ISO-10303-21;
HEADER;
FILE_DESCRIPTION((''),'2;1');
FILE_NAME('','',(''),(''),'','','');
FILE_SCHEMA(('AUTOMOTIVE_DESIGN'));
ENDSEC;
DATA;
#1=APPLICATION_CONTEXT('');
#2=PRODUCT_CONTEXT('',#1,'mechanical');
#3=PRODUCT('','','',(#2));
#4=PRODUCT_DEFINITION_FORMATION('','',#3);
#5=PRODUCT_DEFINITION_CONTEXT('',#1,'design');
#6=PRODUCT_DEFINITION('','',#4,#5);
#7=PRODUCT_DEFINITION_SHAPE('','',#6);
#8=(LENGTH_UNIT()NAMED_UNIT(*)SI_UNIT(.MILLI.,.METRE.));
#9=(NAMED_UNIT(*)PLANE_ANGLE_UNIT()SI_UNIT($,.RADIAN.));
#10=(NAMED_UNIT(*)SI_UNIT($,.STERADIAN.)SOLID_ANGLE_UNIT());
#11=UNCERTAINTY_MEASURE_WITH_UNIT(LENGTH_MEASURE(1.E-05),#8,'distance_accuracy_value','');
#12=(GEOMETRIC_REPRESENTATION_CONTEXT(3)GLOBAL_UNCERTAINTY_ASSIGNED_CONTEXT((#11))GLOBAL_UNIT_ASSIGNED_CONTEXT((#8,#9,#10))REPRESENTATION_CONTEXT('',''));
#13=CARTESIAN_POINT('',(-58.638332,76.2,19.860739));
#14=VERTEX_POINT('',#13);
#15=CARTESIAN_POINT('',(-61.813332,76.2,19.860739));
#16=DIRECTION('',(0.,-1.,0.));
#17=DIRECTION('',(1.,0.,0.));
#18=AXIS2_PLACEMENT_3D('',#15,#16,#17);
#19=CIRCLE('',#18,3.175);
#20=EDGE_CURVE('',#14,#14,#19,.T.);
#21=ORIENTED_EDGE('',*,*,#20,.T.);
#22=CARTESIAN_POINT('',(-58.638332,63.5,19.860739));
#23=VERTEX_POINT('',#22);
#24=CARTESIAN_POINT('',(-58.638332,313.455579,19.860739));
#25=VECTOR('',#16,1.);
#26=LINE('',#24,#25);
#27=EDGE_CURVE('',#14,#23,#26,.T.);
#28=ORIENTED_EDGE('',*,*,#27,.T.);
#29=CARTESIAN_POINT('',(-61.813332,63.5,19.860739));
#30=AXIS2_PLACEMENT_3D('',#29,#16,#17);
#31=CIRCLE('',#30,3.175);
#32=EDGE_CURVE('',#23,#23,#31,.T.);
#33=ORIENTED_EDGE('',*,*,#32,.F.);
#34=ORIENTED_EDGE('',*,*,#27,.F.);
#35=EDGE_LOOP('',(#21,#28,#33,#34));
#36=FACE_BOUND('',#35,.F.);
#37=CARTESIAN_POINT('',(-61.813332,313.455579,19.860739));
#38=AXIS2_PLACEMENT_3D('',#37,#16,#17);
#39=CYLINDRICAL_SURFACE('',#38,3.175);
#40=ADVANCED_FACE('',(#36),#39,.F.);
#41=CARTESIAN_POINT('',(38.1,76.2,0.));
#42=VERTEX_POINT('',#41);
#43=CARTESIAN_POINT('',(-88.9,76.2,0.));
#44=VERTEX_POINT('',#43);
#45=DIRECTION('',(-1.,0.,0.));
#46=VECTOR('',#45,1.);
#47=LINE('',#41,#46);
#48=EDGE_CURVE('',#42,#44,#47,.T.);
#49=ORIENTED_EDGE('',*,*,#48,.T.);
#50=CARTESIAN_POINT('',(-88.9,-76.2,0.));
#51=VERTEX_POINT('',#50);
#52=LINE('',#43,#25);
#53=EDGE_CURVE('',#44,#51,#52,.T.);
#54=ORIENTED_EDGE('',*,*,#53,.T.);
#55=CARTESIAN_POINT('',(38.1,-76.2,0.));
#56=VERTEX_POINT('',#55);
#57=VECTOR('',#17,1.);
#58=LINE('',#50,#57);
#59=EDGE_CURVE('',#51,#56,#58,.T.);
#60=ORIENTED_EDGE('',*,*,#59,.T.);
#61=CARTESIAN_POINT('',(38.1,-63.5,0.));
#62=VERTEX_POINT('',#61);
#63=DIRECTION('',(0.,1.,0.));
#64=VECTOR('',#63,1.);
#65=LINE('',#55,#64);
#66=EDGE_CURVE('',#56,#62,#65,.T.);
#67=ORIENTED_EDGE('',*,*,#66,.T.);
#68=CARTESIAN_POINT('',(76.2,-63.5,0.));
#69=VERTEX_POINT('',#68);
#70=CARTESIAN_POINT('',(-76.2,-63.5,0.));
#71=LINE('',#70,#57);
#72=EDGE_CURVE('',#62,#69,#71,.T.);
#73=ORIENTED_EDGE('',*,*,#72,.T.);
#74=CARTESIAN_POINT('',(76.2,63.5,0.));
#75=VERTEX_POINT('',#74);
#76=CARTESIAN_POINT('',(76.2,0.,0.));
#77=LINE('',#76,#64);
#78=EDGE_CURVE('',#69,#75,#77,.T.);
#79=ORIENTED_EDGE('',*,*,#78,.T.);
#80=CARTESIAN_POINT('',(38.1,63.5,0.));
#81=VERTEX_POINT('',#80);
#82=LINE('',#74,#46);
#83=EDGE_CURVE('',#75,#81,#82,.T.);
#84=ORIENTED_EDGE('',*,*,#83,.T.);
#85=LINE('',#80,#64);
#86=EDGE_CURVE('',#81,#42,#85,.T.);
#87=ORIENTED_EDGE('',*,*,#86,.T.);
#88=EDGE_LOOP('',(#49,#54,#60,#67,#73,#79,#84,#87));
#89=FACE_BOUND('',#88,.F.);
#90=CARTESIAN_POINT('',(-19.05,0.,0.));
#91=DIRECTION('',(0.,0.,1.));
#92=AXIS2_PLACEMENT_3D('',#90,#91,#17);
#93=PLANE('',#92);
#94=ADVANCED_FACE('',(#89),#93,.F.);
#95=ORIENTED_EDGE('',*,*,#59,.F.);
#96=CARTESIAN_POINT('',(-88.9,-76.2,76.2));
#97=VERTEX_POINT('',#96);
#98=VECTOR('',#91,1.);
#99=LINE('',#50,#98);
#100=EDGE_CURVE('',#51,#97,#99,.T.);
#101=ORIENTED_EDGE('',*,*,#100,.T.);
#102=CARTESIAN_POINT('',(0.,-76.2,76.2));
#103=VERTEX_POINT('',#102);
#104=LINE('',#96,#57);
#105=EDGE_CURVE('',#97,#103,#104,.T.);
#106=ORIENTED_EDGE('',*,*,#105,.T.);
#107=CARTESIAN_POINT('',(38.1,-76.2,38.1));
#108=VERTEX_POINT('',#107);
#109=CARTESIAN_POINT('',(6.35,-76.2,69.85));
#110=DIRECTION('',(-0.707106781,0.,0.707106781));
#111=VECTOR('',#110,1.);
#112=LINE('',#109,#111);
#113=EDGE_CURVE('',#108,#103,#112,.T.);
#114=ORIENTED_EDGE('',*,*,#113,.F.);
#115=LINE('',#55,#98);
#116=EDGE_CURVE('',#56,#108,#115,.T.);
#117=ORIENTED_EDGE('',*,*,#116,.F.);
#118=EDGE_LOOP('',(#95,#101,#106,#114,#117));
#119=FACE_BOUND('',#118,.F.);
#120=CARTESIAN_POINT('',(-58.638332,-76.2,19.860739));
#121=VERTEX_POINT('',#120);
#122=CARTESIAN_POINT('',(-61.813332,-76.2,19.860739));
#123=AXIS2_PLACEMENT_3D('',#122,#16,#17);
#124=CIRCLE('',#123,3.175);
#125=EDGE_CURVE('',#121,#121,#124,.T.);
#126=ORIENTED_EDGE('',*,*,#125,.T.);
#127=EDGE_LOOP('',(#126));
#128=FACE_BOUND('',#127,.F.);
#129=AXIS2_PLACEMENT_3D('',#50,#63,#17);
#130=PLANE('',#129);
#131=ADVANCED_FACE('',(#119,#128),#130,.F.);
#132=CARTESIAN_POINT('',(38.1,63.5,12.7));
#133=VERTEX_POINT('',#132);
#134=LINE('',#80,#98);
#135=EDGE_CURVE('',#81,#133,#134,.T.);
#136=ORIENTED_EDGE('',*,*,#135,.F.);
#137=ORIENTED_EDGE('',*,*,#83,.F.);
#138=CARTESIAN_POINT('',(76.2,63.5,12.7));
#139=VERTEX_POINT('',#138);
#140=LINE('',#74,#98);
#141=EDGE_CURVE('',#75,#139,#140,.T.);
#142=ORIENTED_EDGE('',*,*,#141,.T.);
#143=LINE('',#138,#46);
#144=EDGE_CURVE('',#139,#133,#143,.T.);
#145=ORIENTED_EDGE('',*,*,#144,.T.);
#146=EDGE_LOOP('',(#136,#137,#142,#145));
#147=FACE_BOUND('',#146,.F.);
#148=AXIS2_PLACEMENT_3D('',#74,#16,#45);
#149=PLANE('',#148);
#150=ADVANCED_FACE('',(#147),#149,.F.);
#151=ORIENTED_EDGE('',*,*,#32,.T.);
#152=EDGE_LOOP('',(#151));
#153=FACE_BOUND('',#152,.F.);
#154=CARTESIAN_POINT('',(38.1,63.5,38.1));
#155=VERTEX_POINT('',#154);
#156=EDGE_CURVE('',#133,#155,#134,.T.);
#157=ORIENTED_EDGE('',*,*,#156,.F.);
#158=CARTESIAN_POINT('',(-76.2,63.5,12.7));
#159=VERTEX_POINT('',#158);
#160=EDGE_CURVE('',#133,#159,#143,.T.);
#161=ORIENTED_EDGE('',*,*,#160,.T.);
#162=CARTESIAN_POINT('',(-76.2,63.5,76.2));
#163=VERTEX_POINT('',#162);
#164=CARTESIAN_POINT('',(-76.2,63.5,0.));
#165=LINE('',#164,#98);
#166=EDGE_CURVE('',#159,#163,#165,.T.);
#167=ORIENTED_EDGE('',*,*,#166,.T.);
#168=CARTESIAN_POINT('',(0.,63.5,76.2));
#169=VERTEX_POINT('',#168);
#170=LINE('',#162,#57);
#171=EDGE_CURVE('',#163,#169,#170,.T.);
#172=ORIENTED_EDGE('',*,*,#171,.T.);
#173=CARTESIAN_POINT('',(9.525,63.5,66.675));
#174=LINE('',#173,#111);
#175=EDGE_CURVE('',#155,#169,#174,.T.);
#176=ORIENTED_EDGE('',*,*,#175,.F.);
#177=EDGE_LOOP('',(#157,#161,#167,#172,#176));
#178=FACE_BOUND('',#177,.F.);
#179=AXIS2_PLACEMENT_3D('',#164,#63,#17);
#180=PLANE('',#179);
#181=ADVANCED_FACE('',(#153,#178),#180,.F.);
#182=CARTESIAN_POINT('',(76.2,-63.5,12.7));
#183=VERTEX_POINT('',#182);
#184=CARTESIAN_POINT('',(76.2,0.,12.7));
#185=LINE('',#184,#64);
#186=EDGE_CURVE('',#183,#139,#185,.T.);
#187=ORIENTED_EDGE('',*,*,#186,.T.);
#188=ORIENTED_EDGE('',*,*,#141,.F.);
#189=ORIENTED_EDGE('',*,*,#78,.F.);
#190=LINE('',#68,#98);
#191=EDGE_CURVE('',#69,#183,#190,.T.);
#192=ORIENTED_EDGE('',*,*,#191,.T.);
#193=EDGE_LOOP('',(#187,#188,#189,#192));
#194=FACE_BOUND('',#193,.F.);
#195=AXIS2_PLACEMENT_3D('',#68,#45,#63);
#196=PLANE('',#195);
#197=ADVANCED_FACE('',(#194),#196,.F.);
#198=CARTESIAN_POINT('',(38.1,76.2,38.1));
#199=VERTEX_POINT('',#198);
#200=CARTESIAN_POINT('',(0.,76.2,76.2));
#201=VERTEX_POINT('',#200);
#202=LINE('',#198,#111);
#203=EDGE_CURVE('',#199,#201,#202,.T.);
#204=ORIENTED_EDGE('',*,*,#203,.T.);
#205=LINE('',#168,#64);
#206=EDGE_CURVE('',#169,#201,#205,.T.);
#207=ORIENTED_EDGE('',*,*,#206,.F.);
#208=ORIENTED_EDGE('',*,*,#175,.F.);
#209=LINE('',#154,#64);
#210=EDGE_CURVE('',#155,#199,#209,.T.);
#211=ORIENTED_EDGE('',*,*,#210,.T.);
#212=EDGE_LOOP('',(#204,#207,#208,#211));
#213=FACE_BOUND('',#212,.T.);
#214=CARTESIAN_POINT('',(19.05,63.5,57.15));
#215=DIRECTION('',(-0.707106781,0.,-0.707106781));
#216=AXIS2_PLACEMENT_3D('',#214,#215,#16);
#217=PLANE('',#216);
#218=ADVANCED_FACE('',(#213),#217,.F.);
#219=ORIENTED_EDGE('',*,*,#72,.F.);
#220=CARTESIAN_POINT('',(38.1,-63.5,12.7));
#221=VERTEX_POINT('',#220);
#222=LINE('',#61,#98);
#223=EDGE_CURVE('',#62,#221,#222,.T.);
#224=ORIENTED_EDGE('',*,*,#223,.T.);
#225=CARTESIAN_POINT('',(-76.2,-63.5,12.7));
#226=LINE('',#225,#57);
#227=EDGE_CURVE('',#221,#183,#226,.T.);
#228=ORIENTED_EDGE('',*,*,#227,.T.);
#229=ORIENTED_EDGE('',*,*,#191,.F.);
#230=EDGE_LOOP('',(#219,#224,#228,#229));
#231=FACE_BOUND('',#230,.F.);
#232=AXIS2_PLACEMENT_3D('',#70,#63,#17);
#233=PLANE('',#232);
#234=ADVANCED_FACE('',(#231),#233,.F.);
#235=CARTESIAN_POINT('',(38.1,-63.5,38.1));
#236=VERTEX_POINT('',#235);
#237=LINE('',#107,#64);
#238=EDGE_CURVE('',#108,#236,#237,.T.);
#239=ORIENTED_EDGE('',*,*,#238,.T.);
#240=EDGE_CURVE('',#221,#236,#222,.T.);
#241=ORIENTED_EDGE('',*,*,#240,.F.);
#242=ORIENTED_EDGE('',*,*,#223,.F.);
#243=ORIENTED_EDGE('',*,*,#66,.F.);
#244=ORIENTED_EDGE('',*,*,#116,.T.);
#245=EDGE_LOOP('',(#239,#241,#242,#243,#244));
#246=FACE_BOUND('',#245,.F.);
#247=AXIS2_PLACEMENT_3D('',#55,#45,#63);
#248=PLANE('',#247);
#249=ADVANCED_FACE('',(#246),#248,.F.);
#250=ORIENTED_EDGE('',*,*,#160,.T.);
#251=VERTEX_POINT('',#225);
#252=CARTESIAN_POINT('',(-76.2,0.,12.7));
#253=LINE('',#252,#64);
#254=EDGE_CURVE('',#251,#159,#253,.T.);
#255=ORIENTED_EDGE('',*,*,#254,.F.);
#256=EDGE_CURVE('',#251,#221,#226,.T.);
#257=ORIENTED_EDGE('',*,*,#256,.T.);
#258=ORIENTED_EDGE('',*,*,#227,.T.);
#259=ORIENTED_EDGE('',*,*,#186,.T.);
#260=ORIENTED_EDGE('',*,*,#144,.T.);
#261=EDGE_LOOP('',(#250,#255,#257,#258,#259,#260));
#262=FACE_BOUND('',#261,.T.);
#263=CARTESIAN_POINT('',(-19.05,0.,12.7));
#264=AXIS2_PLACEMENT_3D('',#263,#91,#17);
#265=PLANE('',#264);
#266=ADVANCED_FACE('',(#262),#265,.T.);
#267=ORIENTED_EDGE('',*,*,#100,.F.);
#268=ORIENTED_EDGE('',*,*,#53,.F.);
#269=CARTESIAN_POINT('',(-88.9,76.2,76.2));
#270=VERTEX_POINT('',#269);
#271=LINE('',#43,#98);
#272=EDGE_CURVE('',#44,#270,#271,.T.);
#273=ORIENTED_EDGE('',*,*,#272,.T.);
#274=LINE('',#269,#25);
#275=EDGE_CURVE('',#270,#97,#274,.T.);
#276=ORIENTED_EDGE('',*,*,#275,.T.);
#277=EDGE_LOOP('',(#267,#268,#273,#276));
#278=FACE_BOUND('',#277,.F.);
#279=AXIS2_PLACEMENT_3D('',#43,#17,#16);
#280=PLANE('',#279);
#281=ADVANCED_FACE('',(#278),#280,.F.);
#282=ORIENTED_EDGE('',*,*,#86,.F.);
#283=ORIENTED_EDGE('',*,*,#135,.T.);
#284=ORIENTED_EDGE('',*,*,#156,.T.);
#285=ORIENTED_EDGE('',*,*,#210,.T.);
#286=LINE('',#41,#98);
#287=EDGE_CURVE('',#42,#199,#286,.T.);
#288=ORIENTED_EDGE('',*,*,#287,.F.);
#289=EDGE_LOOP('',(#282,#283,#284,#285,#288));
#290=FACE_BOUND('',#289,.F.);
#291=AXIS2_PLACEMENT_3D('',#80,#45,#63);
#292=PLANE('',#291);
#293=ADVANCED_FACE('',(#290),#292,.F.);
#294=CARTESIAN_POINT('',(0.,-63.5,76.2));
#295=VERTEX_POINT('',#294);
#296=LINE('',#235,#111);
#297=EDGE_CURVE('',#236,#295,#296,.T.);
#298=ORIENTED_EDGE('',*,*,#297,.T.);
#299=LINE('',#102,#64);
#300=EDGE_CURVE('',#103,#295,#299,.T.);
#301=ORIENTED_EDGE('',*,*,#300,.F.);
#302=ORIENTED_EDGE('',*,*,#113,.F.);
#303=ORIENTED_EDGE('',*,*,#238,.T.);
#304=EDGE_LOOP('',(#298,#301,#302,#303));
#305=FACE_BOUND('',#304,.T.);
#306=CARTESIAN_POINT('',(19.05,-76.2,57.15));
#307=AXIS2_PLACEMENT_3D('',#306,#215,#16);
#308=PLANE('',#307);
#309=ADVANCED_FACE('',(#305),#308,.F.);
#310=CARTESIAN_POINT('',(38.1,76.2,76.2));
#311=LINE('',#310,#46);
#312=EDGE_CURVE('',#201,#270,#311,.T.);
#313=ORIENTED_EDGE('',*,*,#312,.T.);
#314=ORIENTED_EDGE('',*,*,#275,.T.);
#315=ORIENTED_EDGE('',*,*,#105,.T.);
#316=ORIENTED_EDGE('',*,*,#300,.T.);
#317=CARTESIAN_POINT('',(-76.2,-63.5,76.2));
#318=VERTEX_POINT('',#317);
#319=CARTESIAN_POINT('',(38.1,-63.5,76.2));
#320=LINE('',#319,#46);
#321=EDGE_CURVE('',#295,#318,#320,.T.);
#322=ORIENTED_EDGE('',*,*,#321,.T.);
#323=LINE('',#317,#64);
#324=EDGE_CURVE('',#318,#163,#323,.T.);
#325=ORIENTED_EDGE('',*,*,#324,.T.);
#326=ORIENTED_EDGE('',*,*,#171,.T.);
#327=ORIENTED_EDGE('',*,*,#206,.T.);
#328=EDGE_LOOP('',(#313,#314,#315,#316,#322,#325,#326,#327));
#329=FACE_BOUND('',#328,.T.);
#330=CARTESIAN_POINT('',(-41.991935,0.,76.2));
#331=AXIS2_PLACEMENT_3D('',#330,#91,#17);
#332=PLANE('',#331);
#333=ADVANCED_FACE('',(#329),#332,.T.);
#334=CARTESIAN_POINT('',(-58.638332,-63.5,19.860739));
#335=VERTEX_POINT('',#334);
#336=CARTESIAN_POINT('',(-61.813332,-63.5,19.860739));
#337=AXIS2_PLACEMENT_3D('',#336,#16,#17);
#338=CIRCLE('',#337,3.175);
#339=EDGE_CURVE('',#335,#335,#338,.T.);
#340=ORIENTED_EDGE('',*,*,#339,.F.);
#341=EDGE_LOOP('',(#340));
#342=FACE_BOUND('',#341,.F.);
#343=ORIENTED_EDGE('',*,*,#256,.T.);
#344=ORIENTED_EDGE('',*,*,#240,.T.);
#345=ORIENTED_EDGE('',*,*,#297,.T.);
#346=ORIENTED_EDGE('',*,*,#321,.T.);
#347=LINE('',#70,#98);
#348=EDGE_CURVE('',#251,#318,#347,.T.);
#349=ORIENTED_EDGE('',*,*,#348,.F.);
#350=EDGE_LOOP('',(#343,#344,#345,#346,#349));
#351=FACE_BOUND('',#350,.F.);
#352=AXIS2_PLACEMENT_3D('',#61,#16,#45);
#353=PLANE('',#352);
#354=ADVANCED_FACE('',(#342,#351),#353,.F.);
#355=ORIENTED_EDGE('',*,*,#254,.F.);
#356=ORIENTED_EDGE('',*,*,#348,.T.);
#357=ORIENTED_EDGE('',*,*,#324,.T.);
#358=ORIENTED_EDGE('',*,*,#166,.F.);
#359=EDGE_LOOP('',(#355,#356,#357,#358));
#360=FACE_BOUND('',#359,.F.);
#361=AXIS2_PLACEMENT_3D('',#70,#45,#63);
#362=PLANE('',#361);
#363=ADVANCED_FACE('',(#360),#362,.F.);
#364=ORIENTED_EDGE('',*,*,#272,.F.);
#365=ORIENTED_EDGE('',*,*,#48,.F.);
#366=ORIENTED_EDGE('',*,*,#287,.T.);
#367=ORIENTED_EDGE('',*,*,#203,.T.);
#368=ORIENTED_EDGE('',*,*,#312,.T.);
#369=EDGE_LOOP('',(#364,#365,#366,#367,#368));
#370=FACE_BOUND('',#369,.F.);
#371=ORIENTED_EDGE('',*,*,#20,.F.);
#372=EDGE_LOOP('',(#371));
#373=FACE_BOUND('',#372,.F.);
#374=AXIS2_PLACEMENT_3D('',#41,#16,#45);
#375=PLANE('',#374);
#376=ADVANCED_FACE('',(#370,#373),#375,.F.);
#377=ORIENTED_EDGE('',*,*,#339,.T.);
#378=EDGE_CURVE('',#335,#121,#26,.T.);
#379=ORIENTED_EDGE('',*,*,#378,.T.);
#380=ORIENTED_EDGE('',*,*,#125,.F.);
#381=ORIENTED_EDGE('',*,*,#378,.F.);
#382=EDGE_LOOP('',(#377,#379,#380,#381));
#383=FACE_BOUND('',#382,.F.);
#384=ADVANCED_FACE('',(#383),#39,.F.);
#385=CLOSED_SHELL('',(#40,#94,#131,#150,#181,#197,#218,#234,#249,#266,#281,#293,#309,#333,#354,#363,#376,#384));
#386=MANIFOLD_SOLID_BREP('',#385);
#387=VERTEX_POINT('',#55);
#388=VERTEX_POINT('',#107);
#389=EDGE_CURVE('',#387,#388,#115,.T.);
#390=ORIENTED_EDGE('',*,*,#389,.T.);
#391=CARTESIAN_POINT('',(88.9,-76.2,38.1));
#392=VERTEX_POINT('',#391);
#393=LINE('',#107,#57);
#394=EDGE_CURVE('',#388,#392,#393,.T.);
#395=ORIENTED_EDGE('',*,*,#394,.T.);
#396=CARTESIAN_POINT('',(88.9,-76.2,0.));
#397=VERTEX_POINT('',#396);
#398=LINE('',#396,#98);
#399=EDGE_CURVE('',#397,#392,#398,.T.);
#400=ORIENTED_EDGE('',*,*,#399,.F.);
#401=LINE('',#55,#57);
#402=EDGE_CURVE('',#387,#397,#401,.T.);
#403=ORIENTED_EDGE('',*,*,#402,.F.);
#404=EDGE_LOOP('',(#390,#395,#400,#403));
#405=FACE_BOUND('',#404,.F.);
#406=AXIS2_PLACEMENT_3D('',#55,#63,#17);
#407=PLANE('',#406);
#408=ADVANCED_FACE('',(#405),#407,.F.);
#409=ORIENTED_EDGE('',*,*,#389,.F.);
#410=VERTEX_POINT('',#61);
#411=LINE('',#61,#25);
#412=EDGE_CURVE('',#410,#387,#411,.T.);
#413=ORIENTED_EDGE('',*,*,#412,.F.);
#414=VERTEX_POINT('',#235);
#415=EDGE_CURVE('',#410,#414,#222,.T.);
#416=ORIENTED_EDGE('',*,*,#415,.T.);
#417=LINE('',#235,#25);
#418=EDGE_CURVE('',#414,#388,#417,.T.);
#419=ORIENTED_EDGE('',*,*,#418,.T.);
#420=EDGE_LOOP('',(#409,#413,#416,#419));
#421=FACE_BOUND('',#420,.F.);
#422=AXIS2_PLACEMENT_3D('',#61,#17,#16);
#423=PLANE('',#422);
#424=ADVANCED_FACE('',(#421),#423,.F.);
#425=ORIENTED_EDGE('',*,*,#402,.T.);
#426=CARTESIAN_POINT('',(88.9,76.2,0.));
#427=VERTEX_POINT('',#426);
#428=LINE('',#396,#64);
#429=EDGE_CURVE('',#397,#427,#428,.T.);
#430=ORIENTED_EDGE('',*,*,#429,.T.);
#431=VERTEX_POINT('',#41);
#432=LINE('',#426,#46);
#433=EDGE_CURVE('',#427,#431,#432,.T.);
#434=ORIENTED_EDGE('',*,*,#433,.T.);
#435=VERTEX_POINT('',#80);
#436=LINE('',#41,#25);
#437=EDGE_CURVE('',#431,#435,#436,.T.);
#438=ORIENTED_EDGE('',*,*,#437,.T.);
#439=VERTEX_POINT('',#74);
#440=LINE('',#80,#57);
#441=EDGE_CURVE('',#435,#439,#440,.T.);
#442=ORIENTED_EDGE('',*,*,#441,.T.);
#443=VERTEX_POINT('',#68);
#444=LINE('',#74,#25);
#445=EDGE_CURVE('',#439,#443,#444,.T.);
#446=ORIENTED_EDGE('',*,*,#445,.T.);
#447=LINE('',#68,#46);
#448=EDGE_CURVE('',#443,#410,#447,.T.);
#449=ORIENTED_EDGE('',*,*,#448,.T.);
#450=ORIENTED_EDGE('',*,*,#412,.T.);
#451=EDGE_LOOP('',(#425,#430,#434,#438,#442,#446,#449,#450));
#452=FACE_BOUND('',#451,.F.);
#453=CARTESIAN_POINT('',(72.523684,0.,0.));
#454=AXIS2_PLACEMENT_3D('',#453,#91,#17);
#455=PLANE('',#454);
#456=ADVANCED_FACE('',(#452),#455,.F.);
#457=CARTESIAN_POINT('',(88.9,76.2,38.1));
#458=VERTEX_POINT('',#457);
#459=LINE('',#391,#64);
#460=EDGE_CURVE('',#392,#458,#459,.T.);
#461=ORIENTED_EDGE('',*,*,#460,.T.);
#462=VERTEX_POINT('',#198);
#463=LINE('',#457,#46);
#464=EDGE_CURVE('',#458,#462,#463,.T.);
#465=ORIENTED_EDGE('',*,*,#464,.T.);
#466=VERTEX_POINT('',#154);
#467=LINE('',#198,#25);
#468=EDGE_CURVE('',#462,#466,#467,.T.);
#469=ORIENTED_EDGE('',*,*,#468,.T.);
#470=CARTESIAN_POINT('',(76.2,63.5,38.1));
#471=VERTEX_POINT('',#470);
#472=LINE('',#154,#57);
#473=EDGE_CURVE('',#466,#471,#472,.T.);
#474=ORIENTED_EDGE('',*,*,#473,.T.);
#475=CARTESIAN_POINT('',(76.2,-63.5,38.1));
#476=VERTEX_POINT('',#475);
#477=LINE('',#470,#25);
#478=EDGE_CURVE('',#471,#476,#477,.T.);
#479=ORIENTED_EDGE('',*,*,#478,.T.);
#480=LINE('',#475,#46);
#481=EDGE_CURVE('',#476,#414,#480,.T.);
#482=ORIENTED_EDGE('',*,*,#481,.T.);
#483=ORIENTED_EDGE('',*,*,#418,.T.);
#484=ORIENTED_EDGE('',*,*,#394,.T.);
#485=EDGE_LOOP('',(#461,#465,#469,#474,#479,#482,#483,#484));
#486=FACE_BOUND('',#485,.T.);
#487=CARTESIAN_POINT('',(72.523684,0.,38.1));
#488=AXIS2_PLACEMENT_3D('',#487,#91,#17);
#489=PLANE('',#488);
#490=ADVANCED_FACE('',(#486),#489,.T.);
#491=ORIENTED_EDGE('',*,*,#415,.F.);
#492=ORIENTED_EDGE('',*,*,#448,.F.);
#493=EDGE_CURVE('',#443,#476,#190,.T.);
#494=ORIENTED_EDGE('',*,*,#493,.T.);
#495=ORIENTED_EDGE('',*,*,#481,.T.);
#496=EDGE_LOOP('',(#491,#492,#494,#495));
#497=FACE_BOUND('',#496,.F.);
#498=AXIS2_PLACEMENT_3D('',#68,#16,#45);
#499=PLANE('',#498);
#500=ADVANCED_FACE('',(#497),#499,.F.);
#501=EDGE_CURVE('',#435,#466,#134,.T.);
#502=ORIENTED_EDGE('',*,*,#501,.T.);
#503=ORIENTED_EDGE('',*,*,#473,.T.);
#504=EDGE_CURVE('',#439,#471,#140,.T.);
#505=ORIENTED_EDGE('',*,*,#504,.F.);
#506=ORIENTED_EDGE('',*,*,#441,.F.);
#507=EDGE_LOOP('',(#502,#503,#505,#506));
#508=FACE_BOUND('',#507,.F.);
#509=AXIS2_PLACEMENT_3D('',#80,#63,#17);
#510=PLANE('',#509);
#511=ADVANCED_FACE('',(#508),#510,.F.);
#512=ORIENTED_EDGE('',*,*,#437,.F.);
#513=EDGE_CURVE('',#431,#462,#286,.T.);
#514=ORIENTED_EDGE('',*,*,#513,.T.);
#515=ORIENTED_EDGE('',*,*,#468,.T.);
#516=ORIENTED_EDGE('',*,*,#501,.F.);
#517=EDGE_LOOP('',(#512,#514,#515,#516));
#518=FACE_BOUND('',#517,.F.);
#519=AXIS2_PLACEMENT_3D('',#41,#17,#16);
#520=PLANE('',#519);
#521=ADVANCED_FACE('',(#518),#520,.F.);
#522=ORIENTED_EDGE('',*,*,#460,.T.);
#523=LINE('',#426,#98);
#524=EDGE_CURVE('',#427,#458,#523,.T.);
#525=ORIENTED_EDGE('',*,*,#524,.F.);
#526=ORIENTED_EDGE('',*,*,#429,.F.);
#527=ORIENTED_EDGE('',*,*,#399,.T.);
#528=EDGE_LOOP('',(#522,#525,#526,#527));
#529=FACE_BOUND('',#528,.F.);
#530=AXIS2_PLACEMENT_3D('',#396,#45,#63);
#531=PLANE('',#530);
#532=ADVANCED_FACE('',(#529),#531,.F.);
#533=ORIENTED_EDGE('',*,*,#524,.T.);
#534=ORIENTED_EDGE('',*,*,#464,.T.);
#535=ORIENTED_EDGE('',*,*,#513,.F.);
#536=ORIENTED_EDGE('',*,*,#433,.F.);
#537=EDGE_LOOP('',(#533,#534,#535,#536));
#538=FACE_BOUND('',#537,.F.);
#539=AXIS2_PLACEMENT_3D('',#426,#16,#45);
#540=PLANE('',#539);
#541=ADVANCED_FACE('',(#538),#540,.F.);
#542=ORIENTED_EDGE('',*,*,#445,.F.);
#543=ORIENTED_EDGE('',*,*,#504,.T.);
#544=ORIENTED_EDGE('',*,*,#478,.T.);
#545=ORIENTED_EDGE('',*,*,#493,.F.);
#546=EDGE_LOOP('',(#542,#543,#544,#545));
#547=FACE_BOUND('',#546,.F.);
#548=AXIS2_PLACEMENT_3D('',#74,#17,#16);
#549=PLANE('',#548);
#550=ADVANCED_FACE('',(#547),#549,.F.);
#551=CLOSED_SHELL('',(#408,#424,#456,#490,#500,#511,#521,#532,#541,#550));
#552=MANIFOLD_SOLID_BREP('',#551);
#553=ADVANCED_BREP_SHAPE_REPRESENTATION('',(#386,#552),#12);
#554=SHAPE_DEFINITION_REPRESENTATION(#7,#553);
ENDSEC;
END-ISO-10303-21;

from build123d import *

# Parameters (mm, degrees)
F1_DEPTH = 76.2
F2_DEPTH = 38.1
F3_SIZE  = 38.1
F0_W     = 114.3
F0_H     = 127
F0_W_2   = 38.1
F4_DEPTH = 12.7
F6_D     = 6.35


with BuildPart() as f1:
    # F0 (on Top) → F1 (new body)
    with BuildSketch(Plane.XY):
        Polygon((-88.9, -76.2), (38.1, -76.2), (38.1, -63.5), (-76.2, -63.5), (-76.2, 63.5), (38.1, 63.5), (38.1, 76.2), (-88.9, 76.2), align=None)
    extrude(amount=F1_DEPTH)

    # F3
    f3_edges = [f1.edges().sort_by_distance(p)[0] for p in [
        (38.1, -69.85, 76.2),
        (38.1, 69.85, 76.2),
    ]]
    chamfer(f3_edges, length=F3_SIZE)

    # F0 (on Top) → F4 (join)
    with BuildSketch(Plane.XY):
        with Locations((-19.05, 0)):
            Rectangle(F0_W, F0_H)
        with Locations((57.15, 0)):
            Rectangle(F0_W_2, F0_H)
    extrude(amount=F4_DEPTH)

    # F6 (through all)
    with Locations(Plane(origin=(0, 76.2, 0), x_dir=(-1, 0, 0), z_dir=(0, 1, 0))):
        with Locations((61.8133324465, 19.8607390972)):
            Hole(F6_D / 2)


with BuildPart() as f2:
    # F0 (on Top) → F2 (new body)
    with BuildSketch(Plane.XY):
        Polygon((38.1, -76.2), (88.9, -76.2), (88.9, 76.2), (38.1, 76.2), (38.1, 63.5), (76.2, 63.5), (76.2, -63.5), (38.1, -63.5), align=None)
    extrude(amount=F2_DEPTH)


solid = Compound([f1.part, f2.part])
